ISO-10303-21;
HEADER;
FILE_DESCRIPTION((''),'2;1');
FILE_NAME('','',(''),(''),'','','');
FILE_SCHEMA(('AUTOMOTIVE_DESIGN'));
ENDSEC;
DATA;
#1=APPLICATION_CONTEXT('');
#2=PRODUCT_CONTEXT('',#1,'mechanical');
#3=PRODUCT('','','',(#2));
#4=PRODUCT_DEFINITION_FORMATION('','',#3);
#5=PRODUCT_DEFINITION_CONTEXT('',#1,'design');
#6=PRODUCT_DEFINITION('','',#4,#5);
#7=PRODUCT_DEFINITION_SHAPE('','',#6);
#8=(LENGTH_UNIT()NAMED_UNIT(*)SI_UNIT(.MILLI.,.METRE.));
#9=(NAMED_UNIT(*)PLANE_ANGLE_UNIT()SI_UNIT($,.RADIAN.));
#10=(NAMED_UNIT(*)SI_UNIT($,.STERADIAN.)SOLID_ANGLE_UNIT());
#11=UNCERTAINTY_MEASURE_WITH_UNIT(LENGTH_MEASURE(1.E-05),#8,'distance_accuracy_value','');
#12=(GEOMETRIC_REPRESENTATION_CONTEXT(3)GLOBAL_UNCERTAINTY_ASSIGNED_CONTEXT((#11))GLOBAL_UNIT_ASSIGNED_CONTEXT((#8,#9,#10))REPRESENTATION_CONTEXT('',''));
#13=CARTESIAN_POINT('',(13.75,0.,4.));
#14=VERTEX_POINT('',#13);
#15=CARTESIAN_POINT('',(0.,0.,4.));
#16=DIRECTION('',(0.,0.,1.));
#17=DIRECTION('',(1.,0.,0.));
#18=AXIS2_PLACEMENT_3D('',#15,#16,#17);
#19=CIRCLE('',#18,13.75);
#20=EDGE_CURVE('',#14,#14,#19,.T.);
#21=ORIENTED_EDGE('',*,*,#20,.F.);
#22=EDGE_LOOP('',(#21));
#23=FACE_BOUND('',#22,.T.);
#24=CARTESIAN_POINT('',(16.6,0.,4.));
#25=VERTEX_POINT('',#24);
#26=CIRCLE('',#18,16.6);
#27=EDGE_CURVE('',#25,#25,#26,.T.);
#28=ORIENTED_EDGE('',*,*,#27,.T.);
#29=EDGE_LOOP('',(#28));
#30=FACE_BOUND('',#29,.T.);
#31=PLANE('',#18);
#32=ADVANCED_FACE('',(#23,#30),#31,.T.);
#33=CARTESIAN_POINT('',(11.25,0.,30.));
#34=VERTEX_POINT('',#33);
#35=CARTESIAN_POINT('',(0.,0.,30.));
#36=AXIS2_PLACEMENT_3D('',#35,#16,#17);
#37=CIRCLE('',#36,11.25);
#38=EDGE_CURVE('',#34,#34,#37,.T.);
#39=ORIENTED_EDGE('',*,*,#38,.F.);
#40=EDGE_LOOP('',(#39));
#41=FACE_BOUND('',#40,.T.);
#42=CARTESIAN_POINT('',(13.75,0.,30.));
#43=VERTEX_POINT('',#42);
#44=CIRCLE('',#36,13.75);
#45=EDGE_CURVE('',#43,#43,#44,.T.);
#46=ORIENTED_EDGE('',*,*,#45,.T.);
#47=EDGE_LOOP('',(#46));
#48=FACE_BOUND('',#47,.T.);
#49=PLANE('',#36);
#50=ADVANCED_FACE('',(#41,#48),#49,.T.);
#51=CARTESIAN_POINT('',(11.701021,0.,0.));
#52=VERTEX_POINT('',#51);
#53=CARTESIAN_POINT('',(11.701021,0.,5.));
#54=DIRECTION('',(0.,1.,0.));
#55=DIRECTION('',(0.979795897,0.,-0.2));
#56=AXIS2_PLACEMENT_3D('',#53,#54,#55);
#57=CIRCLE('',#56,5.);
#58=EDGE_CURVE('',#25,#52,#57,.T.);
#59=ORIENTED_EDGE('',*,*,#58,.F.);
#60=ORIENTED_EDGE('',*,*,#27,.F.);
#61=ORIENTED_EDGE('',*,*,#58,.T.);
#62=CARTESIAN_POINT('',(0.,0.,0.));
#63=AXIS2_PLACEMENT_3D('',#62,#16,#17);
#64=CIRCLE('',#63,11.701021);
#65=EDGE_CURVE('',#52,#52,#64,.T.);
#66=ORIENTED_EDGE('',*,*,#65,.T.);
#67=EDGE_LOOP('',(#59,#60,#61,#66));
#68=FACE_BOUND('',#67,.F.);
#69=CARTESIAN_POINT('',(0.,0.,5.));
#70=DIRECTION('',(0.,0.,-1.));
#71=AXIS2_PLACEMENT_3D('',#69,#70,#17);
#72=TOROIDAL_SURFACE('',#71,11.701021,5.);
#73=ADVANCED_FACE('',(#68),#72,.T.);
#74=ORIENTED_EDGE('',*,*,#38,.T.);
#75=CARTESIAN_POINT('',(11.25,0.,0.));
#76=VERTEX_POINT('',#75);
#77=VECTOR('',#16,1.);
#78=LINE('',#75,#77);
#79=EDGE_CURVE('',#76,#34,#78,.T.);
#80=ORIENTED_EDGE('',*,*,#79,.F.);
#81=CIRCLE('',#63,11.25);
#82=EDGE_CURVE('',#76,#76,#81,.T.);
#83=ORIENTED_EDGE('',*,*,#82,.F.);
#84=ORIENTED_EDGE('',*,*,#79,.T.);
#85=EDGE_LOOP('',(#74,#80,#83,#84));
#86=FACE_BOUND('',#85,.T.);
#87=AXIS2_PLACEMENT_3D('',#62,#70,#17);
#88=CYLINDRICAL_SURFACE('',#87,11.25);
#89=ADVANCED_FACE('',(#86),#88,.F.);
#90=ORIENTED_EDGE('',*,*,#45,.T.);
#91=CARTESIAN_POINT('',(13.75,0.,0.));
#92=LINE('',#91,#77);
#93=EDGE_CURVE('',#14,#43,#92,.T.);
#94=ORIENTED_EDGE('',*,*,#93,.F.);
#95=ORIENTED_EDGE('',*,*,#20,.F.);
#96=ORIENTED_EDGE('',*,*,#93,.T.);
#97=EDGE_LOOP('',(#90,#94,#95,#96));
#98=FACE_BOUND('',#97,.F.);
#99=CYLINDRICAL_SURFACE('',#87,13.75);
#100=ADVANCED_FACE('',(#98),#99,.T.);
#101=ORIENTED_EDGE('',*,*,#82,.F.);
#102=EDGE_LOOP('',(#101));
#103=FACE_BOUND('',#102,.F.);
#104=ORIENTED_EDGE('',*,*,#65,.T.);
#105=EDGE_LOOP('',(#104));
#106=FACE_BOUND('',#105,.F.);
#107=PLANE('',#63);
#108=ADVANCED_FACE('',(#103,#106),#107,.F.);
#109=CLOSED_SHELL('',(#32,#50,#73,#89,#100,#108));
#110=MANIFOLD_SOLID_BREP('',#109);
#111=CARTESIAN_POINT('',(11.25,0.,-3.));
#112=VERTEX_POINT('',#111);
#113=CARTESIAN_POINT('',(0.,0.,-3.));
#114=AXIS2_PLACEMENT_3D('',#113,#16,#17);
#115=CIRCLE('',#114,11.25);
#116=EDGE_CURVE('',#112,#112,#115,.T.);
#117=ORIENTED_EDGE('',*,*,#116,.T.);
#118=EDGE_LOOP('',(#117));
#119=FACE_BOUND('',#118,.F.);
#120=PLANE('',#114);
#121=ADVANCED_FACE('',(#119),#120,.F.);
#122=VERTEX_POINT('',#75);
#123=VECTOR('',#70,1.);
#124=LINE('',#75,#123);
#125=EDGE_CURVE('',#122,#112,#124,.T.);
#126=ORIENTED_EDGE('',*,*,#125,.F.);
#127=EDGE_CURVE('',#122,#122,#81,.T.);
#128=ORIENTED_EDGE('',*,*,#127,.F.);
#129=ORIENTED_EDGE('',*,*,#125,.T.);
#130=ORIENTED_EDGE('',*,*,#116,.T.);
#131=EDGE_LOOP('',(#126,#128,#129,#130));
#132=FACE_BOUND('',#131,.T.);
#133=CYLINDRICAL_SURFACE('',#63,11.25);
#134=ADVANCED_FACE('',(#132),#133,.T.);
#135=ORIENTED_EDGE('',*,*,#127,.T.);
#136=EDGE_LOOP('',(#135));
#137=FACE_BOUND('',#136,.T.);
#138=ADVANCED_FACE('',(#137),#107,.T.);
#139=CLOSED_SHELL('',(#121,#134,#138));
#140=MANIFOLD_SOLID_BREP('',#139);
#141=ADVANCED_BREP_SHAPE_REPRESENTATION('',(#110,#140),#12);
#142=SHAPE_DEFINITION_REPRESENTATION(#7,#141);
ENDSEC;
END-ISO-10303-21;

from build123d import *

# Parameters (mm, degrees)
F0_R     = 13.75
F0_R_2   = 11.25
F1_DEPTH = 30
F0_R_3   = 16.6
F2_DEPTH = 4
F4_DEPTH = 3


# Not quite as in the source:
# - a fillet or chamfer that OpenCascade refuses, or shapes differently, is made with other operations: its cross-section is extruded or revolved along the edge and cut away or added


with BuildPart() as f1:
    # F0 (on Top) → F1 (new body)
    with BuildSketch(Plane.XY):
        Circle(F0_R)
        Circle(F0_R_2, mode=Mode.SUBTRACT)
    extrude(amount=F1_DEPTH)

    # F0 (on Top) → F2 (join)
    with BuildSketch(Plane.XY):
        Circle(F0_R_3)
        Circle(F0_R, mode=Mode.SUBTRACT)
    extrude(amount=F2_DEPTH)

    # F3: fillet of radius 5 on 1 edges, made by hand

    # F3_s1 → F3_t2 (revolve, cut)
    with BuildSketch(Plane.XZ):
        with BuildLine():
            ThreePointArc((16.6, 4), (14.8632981746, 1.1270166538), (11.7010205144, 0))
            Line((11.7010205144, 0), (16.6, 0))
            Line((16.6, 0), (16.6, 4))
        make_face()
    revolve(axis=Axis((0, 0, 0), (0, 0, 1)), mode=Mode.SUBTRACT)


with BuildPart() as f4:
    # F0 (on Top) → F4 (new body)
    with BuildSketch(Plane.XY):
        Circle(F0_R_2)
    extrude(amount=-F4_DEPTH)


solid = Compound([f1.part, f4.part])
